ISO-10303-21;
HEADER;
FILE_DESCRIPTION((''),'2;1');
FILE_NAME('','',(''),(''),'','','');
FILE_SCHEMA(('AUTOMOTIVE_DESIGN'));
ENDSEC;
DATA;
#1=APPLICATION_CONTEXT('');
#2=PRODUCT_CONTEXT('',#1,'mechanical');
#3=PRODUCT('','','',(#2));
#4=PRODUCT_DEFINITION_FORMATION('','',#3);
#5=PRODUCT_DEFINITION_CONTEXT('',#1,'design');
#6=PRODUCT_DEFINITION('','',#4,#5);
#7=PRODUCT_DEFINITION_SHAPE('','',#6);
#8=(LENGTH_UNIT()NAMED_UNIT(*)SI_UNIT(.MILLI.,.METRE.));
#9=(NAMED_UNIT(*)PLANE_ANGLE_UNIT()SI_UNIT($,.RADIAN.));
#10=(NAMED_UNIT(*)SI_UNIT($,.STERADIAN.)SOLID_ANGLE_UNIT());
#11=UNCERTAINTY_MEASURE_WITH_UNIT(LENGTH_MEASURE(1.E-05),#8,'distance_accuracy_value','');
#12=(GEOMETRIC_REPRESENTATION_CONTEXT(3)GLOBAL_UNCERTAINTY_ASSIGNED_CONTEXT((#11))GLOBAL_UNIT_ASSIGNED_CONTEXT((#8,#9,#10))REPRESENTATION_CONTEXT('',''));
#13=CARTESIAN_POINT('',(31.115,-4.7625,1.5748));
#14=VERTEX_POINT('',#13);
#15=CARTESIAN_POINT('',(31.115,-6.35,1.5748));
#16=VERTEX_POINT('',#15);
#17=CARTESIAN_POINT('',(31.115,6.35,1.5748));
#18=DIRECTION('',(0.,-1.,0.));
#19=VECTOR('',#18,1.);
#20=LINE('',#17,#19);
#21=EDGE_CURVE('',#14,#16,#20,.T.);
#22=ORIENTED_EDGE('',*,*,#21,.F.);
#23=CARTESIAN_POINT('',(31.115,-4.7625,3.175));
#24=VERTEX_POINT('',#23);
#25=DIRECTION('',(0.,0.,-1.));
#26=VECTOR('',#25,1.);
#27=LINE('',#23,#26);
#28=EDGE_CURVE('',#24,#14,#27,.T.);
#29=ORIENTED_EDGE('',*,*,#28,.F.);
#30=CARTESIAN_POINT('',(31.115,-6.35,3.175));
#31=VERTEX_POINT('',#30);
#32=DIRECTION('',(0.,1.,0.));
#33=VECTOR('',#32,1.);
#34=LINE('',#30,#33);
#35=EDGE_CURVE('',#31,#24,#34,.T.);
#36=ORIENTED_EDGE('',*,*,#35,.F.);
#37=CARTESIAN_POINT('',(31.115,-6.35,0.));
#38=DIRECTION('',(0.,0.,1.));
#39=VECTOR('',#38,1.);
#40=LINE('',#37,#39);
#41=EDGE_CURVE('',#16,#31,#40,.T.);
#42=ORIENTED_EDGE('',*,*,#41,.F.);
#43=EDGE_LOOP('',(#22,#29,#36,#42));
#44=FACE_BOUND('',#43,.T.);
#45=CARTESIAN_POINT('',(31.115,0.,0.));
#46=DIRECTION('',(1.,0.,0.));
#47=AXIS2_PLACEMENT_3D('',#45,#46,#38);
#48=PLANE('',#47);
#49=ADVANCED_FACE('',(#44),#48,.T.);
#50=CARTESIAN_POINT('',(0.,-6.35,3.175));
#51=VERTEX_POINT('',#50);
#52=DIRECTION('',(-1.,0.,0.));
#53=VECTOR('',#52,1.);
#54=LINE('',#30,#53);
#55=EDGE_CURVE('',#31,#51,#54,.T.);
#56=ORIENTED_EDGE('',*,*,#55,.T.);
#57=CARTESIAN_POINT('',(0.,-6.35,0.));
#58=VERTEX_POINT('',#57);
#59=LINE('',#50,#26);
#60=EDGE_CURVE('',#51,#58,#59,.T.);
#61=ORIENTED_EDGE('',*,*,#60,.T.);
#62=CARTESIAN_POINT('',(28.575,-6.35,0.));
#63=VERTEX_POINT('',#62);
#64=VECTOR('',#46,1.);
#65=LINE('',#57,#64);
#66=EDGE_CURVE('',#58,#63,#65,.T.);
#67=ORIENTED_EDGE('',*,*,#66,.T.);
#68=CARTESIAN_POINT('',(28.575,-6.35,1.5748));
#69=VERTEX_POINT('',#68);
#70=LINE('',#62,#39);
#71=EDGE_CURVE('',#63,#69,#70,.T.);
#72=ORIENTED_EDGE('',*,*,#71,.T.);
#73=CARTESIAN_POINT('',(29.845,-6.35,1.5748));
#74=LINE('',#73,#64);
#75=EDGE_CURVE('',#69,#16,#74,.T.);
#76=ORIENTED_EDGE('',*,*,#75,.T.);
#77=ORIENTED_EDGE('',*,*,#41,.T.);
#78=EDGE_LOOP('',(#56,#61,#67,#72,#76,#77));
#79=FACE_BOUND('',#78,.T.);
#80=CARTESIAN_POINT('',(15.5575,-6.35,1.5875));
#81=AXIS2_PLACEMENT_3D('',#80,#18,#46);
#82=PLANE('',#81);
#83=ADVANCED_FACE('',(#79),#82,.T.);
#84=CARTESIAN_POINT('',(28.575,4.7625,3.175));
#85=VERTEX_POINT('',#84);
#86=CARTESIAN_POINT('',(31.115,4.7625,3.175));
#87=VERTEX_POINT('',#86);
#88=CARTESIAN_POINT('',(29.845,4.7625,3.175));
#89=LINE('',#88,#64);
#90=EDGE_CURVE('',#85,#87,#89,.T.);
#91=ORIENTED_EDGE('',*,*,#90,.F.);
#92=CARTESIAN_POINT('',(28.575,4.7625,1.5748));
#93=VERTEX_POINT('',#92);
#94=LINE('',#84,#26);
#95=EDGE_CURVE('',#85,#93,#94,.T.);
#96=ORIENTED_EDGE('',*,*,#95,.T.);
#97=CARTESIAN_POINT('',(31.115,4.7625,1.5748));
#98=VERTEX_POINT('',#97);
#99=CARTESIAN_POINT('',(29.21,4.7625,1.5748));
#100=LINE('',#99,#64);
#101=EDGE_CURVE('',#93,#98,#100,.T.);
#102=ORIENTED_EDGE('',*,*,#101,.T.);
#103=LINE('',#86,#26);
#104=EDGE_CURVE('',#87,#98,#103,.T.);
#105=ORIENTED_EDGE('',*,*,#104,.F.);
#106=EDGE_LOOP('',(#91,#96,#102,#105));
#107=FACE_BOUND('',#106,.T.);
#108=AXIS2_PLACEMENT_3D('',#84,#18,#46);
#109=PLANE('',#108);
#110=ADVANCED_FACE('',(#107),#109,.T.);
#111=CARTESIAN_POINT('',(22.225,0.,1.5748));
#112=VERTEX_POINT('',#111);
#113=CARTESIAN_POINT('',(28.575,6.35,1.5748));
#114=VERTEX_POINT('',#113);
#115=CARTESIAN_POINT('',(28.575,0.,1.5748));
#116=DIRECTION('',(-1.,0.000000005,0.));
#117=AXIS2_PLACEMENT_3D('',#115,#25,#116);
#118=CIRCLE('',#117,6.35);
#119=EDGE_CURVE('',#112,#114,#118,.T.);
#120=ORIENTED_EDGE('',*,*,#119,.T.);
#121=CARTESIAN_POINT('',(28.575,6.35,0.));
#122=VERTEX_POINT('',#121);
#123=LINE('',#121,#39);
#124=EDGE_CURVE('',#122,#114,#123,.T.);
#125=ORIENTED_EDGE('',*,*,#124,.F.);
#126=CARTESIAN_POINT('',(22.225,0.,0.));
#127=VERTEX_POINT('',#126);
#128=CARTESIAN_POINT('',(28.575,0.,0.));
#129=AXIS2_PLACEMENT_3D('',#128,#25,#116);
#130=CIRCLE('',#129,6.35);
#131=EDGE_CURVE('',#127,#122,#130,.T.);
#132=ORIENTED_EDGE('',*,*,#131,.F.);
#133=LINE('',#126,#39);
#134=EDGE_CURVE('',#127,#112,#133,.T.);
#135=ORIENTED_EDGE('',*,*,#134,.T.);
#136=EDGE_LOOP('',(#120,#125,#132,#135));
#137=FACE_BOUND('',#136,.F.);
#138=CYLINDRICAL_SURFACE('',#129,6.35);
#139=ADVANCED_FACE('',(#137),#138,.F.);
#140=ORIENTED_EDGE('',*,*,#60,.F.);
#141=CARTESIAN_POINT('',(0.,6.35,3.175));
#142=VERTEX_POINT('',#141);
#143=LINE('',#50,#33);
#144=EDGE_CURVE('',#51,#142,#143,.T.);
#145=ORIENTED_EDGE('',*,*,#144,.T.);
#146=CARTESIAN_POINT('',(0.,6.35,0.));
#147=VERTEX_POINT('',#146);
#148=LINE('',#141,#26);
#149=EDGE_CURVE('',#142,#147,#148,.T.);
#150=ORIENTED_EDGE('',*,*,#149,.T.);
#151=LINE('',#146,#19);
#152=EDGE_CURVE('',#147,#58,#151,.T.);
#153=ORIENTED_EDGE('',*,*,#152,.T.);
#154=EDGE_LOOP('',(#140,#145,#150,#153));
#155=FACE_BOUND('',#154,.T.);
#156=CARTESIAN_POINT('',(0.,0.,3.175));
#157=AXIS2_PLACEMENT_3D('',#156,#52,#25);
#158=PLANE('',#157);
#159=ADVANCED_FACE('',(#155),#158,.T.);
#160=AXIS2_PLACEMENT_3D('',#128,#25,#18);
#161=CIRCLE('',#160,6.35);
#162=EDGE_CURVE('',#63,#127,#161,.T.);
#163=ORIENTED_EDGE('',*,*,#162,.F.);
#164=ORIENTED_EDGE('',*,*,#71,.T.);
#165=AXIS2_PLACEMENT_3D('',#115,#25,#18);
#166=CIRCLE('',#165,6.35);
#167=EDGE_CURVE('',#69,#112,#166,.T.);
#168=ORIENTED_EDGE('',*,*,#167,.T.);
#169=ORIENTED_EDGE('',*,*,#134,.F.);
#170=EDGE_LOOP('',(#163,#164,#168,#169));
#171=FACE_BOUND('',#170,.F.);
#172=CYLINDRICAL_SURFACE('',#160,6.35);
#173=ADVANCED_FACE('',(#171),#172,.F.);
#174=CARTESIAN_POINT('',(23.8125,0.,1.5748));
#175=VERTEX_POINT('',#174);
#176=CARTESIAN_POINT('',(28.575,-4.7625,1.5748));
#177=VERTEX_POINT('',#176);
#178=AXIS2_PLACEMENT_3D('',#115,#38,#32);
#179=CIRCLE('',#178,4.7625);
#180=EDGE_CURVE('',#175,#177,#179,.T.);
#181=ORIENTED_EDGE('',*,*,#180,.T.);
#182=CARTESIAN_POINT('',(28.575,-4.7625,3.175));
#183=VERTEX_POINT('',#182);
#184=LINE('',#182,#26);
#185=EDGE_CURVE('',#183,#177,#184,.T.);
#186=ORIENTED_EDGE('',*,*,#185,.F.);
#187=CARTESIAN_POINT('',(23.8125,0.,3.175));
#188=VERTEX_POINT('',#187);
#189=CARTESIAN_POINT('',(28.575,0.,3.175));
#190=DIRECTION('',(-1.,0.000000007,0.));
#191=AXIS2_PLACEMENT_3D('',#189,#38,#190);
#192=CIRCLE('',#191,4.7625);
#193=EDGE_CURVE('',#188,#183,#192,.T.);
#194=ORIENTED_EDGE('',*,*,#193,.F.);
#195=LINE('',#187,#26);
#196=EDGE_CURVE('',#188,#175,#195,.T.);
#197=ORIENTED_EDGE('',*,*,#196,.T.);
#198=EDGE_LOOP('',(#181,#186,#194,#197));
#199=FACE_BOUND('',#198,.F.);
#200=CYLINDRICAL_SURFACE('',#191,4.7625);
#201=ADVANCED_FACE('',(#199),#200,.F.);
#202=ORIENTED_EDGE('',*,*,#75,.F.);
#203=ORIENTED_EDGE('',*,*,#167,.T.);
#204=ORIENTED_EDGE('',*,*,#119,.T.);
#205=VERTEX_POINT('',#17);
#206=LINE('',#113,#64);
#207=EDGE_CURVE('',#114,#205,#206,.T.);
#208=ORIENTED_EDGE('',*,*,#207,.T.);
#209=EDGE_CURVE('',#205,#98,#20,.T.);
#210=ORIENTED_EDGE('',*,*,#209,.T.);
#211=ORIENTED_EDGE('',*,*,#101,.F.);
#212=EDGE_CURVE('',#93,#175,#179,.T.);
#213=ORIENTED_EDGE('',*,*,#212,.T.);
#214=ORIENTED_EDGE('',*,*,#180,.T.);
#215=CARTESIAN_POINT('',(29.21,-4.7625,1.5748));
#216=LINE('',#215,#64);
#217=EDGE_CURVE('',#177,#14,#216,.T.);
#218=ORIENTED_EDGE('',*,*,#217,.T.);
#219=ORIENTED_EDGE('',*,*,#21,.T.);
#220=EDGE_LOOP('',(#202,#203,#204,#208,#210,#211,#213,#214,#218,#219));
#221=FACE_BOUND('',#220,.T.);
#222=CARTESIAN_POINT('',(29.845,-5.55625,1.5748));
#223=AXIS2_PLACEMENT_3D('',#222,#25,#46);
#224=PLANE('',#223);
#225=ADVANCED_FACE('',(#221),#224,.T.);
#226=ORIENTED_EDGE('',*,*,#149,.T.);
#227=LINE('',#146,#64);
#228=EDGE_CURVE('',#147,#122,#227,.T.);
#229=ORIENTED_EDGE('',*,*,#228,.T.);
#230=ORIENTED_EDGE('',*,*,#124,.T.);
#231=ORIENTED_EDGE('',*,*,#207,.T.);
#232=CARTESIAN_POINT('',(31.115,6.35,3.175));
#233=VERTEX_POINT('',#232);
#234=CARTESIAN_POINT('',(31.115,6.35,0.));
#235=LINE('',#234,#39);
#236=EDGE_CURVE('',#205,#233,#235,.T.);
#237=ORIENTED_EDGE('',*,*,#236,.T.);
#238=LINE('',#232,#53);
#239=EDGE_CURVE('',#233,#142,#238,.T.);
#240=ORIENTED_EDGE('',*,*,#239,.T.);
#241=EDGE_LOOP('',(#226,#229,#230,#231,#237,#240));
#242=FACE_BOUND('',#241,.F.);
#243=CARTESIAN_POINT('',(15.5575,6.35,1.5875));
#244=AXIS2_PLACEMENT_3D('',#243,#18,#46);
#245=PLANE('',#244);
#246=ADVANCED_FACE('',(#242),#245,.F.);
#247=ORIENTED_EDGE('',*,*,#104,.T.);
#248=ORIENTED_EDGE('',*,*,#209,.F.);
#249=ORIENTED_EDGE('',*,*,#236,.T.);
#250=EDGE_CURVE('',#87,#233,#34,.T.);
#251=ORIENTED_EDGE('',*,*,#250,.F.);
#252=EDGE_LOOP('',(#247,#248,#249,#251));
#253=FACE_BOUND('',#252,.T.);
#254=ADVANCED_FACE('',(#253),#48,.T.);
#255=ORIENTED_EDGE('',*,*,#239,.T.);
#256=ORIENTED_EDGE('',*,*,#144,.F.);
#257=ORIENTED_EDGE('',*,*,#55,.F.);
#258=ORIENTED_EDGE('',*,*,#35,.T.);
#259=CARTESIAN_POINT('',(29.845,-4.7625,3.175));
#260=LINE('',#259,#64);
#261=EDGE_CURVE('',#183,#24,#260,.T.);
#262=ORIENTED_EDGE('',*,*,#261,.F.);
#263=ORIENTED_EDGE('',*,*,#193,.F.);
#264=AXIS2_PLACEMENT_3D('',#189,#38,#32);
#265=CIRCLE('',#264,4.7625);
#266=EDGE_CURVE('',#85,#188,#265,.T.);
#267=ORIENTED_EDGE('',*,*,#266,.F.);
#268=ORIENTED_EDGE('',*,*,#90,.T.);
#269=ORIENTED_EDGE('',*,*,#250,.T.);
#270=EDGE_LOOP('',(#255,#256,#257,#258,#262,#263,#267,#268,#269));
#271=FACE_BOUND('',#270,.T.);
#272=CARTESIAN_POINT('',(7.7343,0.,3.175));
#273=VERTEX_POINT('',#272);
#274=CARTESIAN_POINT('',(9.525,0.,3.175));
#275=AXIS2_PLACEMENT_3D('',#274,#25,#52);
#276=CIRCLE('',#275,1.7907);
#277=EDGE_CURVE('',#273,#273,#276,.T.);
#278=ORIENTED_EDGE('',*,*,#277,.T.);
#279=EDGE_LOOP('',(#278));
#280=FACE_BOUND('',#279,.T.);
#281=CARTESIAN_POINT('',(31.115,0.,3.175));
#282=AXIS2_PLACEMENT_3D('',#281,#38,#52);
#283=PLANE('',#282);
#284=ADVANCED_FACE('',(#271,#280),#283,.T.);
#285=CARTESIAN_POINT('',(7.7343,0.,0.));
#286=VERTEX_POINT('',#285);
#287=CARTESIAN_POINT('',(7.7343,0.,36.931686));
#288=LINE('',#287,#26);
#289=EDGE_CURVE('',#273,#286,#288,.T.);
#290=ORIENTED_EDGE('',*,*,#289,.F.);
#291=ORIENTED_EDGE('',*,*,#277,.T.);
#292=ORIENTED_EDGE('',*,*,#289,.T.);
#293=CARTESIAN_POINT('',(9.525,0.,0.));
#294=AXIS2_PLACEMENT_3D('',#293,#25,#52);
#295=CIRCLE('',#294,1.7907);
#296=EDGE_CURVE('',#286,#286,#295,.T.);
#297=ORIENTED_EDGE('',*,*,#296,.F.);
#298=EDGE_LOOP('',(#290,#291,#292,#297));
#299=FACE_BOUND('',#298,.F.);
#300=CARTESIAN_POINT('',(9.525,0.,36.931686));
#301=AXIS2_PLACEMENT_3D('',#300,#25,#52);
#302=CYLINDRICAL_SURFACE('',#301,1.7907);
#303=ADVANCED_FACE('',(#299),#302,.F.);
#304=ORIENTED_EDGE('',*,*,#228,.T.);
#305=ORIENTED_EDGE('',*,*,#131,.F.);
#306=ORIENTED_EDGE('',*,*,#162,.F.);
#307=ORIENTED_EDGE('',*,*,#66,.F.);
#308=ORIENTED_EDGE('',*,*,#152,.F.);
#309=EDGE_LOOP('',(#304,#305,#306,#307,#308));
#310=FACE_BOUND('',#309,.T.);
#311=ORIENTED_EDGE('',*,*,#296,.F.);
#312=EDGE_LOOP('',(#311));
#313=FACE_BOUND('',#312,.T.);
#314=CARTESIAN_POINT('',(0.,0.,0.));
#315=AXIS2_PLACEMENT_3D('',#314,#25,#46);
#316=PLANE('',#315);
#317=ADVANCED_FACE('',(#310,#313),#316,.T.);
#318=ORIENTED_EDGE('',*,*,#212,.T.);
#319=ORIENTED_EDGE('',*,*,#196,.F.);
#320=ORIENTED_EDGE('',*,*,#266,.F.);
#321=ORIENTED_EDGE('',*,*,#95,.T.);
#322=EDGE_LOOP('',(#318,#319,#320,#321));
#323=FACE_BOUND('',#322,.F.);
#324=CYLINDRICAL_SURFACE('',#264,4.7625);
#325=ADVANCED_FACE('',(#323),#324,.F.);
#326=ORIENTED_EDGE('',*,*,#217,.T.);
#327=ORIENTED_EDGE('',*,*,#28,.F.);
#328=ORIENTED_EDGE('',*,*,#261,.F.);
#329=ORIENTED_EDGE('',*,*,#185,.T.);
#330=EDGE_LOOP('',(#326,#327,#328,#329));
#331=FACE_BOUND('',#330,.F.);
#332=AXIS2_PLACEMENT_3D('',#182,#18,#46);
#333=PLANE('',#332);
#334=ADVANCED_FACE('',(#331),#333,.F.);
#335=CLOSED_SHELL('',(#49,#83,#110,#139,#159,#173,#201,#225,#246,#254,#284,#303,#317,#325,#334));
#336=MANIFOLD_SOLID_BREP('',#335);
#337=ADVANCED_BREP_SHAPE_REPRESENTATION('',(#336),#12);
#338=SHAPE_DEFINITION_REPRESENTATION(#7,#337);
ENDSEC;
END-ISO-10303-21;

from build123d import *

# Parameters (mm, degrees)
F1_DEPTH = 6.35
F2_W     = 2.54
F2_H     = 9.525
F3_DEPTH = 3.176
F4_W     = 2.54
F4_H     = 1.5875
F4_H_2   = 9.525
F5_DEPTH = 1.5748
F7_D     = 3.5814


with BuildPart() as f1:
    # F0 (on Front) → F1 (new body, symmetric)
    with BuildSketch(Plane.XZ):
        Polygon((0, 3.175), (0, 0), (31.115, 0), (31.115, 1.5875), (31.115, 3.175), align=None)
    extrude(amount=F1_DEPTH, both=True)

    # F2 (on face) → F3 (cut, through all)
    with BuildSketch(Plane.XY.offset(3.175)):
        with BuildLine():
            Line((28.575, -4.7625), (28.575, 4.7625))
            ThreePointArc((28.575, 4.7625), (25.2074039664, 3.3675960572), (23.8125, 3.35e-08))
            ThreePointArc((23.8125, 3.35e-08), (25.2074039428, -3.3675960336), (28.575, -4.7625))
        make_face()
        with Locations((29.845, 0)):
            Rectangle(F2_W, F2_H)
    extrude(amount=-F3_DEPTH, mode=Mode.SUBTRACT)

    # F4 (on face) → F5 (cut)
    with BuildSketch(Plane(origin=(0, 0, 0), x_dir=(1, 0, 0), z_dir=(0, 0, -1))):
        with Locations((29.845, 5.55625)):
            Rectangle(F4_W, F4_H)
        with Locations((29.845, 0)):
            Rectangle(F4_W, F4_H_2)
        with BuildLine():
            Line((28.575, 4.7625), (28.575, 6.35))
            ThreePointArc((28.575, 6.35), (24.0848719273, 4.4901280484), (22.225, -3.44e-08))
            ThreePointArc((22.225, -3.44e-08), (24.0848719516, -4.4901280727), (28.575, -6.35))
            Line((28.575, -6.35), (28.575, -4.7625))
            ThreePointArc((28.575, -4.7625), (23.8125, 0), (28.575, 4.7625))
        make_face()
        Polygon((31.115, -5.55625), (31.115, -4.7625), (28.575, -4.7625), (28.575, -6.35), (31.115, -6.35), align=None)
    extrude(amount=-F5_DEPTH, mode=Mode.SUBTRACT)

    # F7 (through all)
    with Locations(Plane.XY.offset(3.175)):
        with Locations((9.525, 0)):
            Hole(F7_D / 2)


solid = f1.part
